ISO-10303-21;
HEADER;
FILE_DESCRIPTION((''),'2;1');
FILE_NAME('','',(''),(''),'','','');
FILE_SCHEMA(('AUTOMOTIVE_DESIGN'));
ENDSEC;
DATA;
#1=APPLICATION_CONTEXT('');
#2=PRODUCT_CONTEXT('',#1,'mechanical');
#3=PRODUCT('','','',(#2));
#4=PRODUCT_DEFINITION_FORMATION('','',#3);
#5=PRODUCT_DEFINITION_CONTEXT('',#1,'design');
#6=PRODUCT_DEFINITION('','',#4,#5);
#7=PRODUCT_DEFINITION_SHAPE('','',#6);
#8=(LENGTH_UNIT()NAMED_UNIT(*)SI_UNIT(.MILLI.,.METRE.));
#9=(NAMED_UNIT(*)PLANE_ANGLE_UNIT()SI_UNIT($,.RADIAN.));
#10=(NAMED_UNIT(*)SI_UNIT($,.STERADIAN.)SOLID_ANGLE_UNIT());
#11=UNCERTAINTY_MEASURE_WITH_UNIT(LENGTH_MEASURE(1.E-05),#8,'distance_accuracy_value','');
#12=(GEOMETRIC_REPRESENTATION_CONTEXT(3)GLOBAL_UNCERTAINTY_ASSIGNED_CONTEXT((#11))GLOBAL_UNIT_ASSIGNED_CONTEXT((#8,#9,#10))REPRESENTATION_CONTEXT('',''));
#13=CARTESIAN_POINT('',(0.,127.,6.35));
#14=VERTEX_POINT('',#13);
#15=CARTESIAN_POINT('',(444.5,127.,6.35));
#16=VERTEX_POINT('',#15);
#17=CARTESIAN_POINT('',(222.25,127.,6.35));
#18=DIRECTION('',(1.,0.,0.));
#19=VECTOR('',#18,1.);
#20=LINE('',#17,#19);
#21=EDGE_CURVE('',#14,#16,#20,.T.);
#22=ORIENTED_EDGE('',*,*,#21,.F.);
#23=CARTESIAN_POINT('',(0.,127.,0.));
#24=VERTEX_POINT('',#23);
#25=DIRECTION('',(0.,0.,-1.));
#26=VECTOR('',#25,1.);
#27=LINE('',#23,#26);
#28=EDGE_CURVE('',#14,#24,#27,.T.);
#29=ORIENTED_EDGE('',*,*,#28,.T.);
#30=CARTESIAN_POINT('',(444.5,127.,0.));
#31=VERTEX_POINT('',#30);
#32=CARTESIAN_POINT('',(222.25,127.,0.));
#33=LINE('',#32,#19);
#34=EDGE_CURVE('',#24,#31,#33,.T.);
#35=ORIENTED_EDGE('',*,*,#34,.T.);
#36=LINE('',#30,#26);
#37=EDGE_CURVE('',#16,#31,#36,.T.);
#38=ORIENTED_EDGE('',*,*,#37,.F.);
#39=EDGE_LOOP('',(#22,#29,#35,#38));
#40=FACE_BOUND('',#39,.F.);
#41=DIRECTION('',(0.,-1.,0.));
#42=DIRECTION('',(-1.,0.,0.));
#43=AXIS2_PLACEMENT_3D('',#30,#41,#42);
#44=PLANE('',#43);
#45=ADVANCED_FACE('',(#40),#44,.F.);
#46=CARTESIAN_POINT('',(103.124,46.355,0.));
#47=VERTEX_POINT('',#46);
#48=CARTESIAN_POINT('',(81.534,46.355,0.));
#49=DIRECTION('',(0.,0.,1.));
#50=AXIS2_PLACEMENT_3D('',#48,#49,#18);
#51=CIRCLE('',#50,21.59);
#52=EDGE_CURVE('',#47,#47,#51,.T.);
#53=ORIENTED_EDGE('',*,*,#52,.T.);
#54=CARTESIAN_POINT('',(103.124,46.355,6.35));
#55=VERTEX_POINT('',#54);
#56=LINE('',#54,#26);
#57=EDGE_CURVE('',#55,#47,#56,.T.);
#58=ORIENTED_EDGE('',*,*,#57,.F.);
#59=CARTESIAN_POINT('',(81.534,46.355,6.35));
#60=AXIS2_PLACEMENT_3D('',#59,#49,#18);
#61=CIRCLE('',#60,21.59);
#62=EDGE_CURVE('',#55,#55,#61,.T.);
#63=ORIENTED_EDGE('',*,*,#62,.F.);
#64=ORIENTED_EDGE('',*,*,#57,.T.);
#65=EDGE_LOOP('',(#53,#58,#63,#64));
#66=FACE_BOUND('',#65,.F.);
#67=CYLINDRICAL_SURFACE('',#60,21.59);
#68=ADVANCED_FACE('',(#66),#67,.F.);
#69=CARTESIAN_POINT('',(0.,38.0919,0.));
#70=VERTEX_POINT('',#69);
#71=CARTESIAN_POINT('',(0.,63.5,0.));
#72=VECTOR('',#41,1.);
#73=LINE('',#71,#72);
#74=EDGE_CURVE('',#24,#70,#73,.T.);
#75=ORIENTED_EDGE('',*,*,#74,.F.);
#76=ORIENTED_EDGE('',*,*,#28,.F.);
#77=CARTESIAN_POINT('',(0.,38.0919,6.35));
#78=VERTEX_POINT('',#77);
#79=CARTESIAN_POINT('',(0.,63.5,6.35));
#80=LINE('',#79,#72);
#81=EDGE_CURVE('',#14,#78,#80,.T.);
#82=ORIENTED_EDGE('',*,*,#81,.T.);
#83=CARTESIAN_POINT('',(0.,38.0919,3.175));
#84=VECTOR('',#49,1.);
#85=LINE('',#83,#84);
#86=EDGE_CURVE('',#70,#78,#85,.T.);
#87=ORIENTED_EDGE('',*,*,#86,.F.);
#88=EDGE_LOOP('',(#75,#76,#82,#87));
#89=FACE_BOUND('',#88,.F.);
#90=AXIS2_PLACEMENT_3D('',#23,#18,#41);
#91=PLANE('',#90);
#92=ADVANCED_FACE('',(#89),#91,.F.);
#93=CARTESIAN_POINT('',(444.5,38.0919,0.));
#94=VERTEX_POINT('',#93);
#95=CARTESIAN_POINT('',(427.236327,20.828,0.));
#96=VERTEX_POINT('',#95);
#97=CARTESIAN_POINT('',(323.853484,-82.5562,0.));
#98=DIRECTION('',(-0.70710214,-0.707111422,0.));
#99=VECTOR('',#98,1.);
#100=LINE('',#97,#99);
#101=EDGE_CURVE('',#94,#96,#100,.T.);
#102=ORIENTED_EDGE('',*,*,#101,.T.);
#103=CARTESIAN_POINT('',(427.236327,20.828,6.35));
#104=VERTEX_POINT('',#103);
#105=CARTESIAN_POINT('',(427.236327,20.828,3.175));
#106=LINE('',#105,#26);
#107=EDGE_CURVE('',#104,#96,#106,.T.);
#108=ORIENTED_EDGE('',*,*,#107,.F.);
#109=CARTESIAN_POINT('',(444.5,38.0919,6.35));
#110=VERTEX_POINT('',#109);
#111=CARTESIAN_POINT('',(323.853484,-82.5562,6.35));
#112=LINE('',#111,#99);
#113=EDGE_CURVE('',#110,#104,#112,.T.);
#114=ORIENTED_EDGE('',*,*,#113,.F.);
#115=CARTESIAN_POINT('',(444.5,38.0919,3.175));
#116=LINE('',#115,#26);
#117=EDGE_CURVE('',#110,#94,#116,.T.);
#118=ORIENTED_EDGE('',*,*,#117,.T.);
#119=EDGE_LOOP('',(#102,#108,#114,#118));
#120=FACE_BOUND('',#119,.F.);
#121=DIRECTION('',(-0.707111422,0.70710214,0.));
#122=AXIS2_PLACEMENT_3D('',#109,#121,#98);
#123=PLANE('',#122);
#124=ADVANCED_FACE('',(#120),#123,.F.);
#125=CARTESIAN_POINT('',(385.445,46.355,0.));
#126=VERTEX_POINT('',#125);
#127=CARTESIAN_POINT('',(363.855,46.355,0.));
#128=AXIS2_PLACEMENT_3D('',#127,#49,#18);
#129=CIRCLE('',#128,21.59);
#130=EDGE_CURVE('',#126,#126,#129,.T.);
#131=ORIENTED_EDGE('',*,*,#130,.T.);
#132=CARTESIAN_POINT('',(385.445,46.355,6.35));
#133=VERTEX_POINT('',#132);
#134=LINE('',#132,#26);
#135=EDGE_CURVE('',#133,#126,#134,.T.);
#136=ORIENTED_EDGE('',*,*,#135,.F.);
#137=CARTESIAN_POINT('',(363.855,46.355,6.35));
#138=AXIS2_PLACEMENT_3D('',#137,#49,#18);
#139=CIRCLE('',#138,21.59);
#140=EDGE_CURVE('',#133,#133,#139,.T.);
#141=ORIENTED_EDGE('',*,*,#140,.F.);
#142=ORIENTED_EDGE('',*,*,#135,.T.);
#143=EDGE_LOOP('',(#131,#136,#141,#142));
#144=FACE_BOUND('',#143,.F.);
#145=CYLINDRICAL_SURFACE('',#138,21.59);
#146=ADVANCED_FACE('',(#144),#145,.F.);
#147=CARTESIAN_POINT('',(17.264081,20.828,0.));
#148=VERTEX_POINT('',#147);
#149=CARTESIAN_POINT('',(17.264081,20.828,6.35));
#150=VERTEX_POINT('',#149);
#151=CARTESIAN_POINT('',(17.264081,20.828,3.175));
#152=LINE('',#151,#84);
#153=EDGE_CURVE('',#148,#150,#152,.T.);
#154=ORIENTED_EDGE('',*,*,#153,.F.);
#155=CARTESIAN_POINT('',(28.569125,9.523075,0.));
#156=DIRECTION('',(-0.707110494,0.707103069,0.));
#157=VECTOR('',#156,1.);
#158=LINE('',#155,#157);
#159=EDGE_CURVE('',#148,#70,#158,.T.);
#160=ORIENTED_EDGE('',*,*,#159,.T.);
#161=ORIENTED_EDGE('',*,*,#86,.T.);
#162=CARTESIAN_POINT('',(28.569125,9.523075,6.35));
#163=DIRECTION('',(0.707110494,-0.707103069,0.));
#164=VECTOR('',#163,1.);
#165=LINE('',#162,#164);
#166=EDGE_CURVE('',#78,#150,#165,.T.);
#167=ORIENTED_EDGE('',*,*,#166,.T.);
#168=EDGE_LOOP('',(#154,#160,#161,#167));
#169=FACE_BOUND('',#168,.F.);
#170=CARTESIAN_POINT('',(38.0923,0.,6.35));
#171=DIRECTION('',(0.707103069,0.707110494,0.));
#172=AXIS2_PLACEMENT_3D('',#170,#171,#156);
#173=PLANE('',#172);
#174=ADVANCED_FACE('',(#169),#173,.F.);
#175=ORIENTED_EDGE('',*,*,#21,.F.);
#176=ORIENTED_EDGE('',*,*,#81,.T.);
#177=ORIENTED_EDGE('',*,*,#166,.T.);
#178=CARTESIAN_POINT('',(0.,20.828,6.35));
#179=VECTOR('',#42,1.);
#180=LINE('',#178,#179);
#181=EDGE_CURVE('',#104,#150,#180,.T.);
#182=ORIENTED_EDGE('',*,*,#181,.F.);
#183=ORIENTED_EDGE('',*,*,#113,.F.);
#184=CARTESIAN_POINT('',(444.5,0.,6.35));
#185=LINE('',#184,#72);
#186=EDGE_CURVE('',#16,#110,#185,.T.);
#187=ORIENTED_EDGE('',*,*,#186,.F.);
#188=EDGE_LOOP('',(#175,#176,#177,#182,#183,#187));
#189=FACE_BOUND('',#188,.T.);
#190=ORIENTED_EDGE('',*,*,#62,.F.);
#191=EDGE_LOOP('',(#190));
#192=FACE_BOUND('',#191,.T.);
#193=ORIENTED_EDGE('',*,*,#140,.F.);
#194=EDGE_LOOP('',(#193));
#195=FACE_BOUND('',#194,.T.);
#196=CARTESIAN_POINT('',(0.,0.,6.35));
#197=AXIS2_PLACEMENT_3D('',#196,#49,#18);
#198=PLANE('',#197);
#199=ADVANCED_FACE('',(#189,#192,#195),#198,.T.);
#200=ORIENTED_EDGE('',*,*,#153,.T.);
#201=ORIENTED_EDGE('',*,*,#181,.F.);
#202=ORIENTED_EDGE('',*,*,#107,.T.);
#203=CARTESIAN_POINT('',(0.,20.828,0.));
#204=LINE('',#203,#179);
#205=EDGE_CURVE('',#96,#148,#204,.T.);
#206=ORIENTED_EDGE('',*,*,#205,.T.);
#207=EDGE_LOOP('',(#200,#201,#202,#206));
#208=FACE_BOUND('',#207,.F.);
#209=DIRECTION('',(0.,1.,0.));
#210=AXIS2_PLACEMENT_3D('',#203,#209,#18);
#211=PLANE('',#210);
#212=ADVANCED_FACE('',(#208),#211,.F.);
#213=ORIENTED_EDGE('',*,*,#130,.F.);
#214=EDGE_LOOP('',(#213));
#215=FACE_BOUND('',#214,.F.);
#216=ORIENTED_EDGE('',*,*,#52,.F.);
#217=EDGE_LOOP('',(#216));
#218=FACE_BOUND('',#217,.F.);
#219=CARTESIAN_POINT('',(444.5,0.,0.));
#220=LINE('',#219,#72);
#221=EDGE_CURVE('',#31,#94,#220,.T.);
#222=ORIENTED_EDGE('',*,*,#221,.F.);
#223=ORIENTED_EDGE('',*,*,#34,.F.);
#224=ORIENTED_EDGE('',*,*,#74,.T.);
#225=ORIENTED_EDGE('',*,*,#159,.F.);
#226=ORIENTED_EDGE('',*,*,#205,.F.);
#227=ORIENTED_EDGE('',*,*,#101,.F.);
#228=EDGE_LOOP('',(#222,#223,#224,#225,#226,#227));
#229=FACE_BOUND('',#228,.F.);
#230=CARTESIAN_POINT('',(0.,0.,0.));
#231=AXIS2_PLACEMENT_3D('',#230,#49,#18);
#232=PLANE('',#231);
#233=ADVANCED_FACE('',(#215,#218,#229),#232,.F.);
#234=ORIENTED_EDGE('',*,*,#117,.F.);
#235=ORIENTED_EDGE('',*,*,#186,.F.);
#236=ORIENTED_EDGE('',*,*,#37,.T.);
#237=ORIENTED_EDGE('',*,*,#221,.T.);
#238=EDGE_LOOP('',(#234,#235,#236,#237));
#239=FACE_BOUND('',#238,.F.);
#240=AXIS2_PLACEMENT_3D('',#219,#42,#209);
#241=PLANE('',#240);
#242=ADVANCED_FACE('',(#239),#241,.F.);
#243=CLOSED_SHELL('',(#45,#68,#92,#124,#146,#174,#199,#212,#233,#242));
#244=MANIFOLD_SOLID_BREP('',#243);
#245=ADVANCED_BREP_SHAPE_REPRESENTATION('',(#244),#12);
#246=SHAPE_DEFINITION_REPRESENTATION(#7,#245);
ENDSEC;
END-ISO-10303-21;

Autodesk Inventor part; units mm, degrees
ref_plane "YZ Plane" through (0, 0, 0) normal (1, 0, 0) x (0, 1, 0)
ref_plane "XZ Plane" through (0, 0, 0) normal (0, 1, 0) x (-1, 0, 0)
ref_plane "XY Plane" through (0, 0, 0) normal (0, 0, 1) x (1, 0, 0)
sketch "Sketch1" plane through (0, 0, 0) normal (0, 0, 1) x (1, 0, 0)
  line L0 (0, 0) -> (444.5, 0)
  line L1 (444.5, 0) -> (444.5, 127)
  line L2 (444.5, 127) -> (0, 127)
  line L3 (0, 127) -> (0, 0)
  dimension "d0" = 444.5
  dimension "d1" = 127
extrude "Extrusion1" add sketch "Sketch1" along normal blind 6.35
sketch "Sketch2" plane through (0, 0, 6.35) normal (0, 0, 1) x (1, 0, 0)
  line L0 (0, 0) -> (444.5, 0) projected
  line L1 (38.0923, 0) -> (0, 38.0919)
  line L2 (0, 127) -> (0, 0) projected
  line L3 (0, 0) -> (444.5, 0) projected
  line L4 (444.5, 0) -> (444.5, 127) projected
  line L5 (444.5, 0) -> (406.4, 0)
  line L6 (444.5, 0) -> (482.6, 0) construction
  line L7 (444.5, 0) -> (444.5, 38.0919)
  line L8 (444.5, 38.0919) -> (406.4086, 0)
  point P0 (419.1126, 0)
  dimension "d19" = 38.1
  dimension "d20" = 180
extrude "Extrusion2" cut sketch "Sketch2" against normal blind 50.8
sketch "Sketch3" plane through (0, 0, 6.35) normal (0, 0, 1) x (1, 0, 0)
  line L0 (0, 77.664) -> (80.645, 77.664) construction
  line L1 (444.5, 127) -> (0, 127) projected
  line L2 (80.645, 127) -> (161.29, 127) construction
  circle A0 centre (81.534, 46.355) radius 21.59
  line L3 (444.5, 38.0919) -> (444.5, 127) projected
  line L4 (444.5, 77.664) -> (525.145, 77.664) construction
  line L5 (444.5, 38.0919) -> (444.5, 127) projected
  line L6 (444.5, 46.355) -> (525.145, 46.355) construction
  circle A1 centre (363.855, 46.355) radius 21.59
  line L7 (444.5, 127) -> (0, 127) projected
  line L8 (0, 127) -> (0, 38.0919) projected
  circle A2 centre (58.2577, 38.8774) radius 1.8542
  circle A3 centre (58.3621, 41.6798) radius 1.8288
  circle A4 centre (104.5311, 39.3446) radius 1.8542
  circle A5 centre (104.7028, 53.3654) radius 1.8542
  point P0 (0, 0)
  dimension "d10" = 43.18
  dimension "d18" = 43.18
  dimension "d40" = 46.228
  dimension "d41" = 3.7084
  dimension "d42" = 3.6576
  dimension "d43" = 3.7084
  dimension "d44" = 3.7084
  dimension "d45" = 80.645
  dimension "d46" = 80.645
  dimension "d47" = 73.6346
  dimension "d48" = 14.0208
  dimension "d49" = 2.8024
extrude "Extrusion3" cut sketch "Sketch3" against normal blind 50.8 contours A0 | A1
thicken "Thicken1" operation add thickness 20.828 both sides no extend neighbours yes toward (0, 1, 0) faces at (160.8644, 0, 2.1167)
properties part number "MecanumDriveTrainPlate17-18"
